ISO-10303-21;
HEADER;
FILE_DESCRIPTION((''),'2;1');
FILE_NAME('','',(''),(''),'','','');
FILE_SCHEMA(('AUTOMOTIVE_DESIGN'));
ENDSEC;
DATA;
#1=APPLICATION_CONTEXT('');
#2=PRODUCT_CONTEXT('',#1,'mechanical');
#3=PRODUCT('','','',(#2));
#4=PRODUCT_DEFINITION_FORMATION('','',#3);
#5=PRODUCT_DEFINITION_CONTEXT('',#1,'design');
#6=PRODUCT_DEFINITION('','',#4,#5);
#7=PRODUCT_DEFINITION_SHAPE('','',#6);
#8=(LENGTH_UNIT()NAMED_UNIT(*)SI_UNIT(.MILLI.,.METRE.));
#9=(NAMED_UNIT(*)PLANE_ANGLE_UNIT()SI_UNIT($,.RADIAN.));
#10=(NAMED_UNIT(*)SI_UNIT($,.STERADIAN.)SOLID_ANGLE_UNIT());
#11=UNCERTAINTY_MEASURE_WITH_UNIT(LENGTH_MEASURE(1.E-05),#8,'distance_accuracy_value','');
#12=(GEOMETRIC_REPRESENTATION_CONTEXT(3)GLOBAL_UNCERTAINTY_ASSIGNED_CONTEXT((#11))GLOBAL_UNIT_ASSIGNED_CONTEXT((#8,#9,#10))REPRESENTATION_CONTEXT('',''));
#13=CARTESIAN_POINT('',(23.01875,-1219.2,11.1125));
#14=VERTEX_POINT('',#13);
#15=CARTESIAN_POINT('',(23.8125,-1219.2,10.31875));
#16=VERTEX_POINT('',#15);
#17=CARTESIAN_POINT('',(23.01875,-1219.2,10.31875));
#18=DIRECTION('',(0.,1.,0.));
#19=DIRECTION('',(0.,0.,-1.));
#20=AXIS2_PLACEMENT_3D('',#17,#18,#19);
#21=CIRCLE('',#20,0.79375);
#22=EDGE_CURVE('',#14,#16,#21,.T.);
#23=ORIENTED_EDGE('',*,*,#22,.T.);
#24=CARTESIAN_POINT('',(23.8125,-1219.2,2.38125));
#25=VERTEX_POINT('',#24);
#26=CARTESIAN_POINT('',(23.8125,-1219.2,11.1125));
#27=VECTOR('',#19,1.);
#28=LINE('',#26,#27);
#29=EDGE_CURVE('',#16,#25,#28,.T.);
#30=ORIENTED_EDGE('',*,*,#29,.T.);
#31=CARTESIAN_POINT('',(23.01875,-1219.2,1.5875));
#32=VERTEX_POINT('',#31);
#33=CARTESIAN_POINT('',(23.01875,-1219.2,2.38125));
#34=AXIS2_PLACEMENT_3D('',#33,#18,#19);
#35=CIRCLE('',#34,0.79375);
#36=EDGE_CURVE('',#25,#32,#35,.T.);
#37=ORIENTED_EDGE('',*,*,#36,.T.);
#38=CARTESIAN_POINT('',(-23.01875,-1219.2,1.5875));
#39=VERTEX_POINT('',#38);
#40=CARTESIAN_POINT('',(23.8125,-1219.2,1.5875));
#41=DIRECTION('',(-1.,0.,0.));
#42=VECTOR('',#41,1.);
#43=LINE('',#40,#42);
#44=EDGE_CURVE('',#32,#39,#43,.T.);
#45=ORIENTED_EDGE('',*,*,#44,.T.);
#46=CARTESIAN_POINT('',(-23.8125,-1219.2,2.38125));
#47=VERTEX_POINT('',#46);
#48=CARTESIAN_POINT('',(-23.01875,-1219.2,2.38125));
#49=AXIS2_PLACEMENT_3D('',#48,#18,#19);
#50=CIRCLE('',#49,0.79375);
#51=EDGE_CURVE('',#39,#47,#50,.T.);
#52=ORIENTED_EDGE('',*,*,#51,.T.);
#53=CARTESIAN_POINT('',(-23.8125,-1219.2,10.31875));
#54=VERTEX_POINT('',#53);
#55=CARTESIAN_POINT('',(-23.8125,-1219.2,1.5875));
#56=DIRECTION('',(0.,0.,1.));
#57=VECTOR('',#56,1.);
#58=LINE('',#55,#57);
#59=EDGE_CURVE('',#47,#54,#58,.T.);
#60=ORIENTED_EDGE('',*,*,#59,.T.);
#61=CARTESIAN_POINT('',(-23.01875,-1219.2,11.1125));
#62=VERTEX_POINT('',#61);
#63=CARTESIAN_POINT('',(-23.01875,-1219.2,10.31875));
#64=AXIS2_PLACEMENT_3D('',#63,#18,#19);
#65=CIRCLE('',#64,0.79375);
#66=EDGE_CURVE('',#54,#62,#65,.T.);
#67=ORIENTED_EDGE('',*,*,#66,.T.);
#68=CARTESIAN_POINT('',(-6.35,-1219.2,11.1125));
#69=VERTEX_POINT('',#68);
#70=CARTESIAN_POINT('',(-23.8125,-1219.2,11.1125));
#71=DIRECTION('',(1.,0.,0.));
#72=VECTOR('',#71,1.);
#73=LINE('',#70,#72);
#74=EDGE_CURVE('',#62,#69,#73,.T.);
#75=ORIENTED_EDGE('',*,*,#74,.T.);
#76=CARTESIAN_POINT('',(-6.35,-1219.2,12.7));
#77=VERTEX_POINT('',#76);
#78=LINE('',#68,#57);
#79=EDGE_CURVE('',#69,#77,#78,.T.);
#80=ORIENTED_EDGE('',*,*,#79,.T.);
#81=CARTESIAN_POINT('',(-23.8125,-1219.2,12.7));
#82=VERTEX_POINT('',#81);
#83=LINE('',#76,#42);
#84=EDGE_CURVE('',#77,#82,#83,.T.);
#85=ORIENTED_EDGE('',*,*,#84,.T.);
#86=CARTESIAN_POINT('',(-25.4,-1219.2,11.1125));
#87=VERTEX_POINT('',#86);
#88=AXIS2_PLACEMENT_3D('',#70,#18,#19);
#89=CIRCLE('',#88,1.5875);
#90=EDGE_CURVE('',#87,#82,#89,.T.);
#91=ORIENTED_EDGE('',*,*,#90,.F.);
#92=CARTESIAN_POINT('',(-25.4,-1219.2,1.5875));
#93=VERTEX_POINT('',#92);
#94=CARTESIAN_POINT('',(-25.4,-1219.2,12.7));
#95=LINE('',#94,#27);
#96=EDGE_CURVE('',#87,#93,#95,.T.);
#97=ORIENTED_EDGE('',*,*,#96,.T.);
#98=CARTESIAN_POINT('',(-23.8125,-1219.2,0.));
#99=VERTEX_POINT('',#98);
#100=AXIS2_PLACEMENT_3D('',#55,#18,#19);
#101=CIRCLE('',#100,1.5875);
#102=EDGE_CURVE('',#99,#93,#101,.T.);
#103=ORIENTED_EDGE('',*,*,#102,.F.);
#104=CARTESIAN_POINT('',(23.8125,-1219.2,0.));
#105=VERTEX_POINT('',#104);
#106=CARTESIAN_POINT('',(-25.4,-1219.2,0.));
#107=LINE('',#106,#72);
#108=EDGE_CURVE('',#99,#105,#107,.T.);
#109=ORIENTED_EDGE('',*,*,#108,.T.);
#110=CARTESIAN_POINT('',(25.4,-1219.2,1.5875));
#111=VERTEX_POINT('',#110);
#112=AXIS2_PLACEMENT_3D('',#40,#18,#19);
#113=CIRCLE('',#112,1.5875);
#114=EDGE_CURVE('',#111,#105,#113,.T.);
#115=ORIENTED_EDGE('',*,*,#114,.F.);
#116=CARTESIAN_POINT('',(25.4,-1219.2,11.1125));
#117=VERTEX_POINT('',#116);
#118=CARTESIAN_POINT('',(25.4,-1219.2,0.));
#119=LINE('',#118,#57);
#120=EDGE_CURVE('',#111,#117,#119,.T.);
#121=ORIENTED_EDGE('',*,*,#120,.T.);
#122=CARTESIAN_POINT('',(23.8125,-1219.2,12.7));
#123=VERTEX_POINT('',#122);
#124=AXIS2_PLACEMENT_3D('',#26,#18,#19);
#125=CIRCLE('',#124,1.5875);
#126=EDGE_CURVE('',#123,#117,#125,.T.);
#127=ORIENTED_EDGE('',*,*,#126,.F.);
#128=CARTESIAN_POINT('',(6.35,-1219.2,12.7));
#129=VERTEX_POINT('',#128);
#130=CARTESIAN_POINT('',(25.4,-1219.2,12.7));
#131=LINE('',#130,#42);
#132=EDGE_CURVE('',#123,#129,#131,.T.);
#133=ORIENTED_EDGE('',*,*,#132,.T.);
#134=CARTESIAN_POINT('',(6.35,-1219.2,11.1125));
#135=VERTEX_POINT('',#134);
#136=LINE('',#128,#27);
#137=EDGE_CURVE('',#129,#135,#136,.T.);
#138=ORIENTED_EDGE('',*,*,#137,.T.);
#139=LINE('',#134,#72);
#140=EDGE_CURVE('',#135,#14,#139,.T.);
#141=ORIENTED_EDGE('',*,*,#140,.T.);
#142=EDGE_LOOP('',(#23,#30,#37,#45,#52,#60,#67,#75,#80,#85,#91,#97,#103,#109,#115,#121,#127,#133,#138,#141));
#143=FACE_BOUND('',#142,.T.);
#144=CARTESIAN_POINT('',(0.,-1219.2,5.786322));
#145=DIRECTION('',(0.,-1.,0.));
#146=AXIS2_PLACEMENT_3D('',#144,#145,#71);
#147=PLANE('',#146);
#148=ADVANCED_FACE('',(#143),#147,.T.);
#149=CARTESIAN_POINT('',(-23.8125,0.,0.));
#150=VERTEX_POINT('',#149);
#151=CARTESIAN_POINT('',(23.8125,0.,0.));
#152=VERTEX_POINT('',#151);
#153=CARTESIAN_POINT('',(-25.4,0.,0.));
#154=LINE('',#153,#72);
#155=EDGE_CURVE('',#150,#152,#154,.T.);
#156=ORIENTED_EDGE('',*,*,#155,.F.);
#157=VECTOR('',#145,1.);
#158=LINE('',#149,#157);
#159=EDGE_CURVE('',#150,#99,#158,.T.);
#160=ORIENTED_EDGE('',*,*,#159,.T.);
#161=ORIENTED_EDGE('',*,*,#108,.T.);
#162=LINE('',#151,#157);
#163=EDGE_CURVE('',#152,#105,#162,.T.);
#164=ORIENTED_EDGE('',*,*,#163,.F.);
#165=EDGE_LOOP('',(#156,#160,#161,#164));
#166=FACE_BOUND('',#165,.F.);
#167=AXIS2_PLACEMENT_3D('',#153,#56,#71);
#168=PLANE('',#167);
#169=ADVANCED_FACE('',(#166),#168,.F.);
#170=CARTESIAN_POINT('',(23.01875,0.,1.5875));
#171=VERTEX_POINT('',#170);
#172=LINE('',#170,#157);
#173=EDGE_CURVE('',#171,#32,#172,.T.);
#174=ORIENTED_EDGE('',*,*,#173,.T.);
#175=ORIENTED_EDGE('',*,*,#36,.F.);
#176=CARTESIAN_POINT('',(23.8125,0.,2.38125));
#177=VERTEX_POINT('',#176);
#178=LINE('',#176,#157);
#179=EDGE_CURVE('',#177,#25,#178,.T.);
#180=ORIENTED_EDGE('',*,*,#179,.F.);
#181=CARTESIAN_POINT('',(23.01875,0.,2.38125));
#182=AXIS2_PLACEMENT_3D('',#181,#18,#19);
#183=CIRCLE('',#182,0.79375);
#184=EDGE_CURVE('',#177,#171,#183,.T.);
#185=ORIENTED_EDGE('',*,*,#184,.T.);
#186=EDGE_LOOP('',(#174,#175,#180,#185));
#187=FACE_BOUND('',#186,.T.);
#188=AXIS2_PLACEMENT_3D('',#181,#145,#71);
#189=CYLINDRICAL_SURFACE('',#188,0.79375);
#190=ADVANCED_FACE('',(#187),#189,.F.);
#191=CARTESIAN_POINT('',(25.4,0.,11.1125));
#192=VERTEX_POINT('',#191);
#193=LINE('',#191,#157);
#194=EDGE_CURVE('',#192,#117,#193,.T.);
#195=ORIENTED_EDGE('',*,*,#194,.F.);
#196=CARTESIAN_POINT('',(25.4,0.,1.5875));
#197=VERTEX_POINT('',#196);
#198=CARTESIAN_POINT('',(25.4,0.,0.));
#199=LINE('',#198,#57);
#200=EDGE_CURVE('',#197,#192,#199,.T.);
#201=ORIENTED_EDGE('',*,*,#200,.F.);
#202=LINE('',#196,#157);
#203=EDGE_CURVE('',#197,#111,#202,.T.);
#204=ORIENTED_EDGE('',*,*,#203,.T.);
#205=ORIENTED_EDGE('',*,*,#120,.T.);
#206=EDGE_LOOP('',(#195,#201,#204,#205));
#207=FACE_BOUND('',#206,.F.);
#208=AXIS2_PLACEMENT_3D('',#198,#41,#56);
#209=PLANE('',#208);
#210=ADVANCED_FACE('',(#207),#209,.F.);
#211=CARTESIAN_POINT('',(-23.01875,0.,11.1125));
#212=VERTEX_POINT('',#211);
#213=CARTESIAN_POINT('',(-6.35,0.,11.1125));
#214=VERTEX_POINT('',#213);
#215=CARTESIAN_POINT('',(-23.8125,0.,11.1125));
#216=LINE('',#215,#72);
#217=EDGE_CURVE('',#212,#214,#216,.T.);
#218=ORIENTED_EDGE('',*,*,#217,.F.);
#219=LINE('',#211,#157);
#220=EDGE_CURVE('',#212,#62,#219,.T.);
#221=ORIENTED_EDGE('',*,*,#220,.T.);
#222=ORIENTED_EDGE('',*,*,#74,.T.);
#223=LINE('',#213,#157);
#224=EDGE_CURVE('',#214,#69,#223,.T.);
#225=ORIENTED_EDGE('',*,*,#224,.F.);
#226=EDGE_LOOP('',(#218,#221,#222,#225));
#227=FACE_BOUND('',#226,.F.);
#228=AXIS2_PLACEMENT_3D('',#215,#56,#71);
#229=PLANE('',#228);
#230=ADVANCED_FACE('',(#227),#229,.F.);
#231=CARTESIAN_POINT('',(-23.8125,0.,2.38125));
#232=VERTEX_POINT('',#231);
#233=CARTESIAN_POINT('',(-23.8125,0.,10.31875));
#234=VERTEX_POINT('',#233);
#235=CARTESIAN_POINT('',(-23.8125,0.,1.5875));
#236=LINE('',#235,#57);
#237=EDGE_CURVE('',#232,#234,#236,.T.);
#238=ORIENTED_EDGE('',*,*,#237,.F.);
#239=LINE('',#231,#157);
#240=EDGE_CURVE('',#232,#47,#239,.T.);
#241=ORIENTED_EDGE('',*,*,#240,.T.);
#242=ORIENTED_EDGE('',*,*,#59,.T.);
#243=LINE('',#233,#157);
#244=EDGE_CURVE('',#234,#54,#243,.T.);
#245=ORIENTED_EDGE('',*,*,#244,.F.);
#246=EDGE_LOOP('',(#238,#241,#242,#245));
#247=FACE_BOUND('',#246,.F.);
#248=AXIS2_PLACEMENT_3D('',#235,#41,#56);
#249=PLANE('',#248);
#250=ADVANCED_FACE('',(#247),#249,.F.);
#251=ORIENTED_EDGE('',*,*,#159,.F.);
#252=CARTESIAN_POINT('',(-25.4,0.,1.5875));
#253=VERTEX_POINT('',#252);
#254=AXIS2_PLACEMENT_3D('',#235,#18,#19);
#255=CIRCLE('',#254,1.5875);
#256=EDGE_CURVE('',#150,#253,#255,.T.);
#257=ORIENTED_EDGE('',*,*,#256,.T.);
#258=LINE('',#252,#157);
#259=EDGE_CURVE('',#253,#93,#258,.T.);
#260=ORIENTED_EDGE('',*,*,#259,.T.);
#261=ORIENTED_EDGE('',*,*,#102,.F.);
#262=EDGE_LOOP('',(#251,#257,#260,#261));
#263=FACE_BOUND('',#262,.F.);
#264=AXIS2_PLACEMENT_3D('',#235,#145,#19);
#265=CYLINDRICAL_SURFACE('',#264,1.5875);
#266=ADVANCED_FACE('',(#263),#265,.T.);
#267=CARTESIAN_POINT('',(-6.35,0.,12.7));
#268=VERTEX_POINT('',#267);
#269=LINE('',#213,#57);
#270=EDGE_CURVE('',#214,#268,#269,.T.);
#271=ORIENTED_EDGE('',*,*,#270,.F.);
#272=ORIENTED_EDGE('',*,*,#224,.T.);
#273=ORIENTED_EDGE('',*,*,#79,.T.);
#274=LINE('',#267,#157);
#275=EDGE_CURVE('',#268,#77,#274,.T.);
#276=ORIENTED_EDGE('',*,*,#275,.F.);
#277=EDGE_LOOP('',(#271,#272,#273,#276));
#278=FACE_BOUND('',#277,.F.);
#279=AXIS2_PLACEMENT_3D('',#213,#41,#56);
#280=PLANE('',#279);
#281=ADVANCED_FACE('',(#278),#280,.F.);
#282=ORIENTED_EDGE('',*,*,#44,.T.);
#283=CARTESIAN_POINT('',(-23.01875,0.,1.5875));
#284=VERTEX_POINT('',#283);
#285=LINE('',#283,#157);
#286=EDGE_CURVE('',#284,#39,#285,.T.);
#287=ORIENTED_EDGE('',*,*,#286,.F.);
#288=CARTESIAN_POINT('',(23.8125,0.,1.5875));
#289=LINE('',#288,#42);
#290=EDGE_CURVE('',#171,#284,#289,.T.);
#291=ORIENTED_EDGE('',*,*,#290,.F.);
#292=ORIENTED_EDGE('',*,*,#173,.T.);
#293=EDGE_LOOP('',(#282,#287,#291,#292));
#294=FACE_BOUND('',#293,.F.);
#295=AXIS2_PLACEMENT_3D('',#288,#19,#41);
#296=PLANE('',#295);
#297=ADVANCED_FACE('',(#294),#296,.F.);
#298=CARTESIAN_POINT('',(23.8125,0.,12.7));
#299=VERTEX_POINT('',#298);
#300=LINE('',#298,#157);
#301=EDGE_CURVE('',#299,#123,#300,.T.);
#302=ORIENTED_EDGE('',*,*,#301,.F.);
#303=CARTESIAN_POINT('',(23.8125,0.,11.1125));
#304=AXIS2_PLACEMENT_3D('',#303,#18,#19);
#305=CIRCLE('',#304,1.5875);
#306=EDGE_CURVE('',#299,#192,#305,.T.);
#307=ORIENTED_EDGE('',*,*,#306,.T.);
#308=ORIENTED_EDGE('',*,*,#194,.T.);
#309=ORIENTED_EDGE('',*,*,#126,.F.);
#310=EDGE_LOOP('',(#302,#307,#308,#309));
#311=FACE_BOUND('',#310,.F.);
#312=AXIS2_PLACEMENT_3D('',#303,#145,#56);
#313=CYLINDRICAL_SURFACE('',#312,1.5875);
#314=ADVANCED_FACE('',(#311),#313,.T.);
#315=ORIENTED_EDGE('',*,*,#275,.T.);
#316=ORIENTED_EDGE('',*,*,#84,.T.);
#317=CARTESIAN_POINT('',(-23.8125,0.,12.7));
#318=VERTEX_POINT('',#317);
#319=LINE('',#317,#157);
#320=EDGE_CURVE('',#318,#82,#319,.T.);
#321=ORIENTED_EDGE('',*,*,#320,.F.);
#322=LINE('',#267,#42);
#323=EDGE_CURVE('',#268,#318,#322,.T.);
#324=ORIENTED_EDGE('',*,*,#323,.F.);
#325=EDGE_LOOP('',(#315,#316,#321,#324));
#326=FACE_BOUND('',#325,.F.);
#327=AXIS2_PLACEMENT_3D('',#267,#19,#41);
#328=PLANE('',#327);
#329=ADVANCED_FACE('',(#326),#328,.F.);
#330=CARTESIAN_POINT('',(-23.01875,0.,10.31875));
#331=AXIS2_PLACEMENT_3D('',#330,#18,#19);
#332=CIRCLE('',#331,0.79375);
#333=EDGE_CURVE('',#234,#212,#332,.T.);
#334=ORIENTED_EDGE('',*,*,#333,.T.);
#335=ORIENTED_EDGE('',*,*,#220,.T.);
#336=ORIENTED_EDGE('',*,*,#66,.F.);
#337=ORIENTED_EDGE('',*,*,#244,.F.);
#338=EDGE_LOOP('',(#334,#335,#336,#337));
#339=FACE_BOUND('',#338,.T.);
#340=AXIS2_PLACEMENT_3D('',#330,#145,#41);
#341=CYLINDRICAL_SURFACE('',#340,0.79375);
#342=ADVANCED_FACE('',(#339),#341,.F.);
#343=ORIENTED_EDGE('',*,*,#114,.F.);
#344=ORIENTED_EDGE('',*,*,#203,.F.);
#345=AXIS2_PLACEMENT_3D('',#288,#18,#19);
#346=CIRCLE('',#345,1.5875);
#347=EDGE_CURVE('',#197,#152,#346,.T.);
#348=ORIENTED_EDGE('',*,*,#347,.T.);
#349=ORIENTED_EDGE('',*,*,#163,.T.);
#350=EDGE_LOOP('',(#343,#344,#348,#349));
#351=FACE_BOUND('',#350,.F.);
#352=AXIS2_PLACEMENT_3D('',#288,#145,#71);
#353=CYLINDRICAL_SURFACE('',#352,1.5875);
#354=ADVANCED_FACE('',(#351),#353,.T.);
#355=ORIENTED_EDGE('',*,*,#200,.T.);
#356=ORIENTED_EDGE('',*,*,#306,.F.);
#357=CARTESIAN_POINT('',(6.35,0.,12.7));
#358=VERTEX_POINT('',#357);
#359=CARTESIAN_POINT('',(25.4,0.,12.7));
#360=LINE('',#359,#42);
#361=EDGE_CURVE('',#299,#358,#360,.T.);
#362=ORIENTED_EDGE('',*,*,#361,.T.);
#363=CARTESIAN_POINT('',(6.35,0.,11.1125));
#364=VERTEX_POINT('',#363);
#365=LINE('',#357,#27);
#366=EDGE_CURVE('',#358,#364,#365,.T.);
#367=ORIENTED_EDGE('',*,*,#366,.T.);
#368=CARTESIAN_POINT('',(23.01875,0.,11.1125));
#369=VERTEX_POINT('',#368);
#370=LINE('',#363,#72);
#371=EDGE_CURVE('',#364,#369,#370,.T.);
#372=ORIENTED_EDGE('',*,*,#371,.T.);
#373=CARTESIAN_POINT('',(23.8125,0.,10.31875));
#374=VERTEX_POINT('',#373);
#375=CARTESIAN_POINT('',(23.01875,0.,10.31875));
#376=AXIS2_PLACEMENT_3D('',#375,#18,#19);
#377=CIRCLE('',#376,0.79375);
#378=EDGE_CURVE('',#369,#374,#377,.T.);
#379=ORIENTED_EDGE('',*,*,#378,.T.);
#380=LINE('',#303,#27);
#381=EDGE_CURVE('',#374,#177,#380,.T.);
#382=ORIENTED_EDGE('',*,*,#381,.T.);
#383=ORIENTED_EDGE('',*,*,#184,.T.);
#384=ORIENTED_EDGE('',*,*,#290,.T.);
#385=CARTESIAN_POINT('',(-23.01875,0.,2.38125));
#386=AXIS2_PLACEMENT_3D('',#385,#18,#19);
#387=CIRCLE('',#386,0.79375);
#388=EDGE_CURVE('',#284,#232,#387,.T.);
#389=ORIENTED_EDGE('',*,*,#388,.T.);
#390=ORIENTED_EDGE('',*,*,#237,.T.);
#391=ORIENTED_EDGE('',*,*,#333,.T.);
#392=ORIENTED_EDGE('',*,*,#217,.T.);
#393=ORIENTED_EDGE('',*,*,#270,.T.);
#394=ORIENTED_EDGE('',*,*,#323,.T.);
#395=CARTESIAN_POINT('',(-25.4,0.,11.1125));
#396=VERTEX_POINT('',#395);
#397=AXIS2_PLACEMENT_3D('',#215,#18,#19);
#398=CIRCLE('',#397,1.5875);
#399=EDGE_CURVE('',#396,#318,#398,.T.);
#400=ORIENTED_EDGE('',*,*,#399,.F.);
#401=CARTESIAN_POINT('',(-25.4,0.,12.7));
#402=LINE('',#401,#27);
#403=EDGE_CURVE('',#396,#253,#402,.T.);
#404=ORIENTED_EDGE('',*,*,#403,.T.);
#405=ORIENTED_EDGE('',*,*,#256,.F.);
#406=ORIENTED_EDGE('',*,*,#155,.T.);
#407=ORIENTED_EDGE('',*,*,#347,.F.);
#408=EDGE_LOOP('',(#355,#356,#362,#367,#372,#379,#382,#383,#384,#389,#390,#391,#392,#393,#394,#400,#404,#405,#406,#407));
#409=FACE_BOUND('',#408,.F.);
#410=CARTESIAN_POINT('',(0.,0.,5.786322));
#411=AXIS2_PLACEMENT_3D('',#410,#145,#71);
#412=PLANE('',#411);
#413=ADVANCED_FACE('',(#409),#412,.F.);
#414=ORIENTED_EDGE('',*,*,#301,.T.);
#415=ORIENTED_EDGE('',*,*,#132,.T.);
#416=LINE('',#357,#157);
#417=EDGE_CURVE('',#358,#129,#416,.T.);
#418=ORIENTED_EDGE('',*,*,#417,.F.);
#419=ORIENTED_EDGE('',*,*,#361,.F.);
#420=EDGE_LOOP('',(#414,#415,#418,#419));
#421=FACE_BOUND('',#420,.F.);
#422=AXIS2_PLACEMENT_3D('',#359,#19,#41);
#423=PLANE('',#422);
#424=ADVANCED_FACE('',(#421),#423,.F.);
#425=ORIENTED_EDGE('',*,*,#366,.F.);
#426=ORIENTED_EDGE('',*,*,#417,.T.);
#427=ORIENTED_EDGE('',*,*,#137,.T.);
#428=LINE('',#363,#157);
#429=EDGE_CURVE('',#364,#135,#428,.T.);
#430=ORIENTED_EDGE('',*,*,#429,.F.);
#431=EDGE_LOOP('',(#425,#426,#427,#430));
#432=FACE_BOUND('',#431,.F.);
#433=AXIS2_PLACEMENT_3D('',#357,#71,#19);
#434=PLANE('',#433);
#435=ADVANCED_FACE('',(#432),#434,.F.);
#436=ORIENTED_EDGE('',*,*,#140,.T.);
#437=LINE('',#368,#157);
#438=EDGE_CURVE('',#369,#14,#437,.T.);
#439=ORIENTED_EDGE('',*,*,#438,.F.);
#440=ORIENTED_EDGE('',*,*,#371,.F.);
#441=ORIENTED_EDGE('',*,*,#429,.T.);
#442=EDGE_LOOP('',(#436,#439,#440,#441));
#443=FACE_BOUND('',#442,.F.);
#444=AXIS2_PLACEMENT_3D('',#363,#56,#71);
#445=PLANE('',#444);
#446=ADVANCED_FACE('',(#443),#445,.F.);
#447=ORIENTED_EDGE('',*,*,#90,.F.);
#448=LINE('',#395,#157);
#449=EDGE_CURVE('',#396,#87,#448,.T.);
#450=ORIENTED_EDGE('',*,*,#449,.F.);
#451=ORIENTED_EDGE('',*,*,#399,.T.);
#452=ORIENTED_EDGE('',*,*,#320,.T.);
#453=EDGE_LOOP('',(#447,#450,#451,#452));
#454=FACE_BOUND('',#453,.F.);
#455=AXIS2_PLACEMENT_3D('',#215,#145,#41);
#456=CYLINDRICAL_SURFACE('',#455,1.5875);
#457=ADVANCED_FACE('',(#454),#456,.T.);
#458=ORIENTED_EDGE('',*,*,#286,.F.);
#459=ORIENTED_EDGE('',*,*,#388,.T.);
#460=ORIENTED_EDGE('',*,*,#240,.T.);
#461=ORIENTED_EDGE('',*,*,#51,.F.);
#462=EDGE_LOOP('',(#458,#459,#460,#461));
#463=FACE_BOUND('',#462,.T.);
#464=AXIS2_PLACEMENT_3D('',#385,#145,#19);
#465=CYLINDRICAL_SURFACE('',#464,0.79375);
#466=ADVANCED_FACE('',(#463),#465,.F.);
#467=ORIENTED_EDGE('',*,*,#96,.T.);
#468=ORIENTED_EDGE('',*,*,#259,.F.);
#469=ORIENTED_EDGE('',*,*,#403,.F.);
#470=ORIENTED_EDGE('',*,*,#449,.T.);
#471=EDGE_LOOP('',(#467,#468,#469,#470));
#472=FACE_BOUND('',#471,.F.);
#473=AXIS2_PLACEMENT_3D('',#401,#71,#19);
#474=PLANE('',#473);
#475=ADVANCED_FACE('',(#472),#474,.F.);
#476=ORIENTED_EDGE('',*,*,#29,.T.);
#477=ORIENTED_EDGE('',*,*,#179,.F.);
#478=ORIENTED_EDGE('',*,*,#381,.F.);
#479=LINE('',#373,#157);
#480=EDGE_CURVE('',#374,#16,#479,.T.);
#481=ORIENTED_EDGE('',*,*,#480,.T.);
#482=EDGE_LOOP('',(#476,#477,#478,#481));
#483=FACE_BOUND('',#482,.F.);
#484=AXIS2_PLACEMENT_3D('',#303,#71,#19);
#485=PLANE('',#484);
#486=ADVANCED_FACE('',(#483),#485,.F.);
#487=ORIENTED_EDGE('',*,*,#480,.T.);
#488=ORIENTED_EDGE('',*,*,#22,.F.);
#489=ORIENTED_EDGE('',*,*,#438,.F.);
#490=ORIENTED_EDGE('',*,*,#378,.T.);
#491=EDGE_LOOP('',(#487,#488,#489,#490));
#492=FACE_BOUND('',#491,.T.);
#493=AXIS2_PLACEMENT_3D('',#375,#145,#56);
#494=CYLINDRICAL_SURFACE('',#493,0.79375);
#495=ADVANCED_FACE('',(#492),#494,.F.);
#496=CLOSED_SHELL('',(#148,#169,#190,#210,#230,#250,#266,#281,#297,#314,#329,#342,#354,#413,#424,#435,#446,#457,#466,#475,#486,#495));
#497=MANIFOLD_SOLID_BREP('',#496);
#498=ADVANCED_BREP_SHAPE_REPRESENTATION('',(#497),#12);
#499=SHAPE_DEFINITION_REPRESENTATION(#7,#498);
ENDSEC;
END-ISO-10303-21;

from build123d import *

# Parameters (mm, degrees)
F1_DEPTH = 1219.2
F2_R     = 0.79375
F3_R     = 1.5875


# Not quite as in the source:
# - a feature names something its author has since deleted; it is built from what else it names


with BuildPart() as f1:
    # F0 (on Front) → F1 (new body)
    with BuildSketch(Plane.XZ):
        Polygon((-25.4, 0), (0, 0), (25.4, 0), (25.4, 12.7), (6.35, 12.7), (6.35, 11.1125), (23.8125, 11.1125), (23.8125, 1.5875), (0, 1.5875), (-23.8125, 1.5875), (-23.8125, 11.1125), (-6.35, 11.1125), (-6.35, 12.7), (-25.4, 12.7), align=None)
    extrude(amount=F1_DEPTH)

    # F2
    f2_edges = [f1.edges().sort_by_distance(p)[0] for p in [
        (-23.8125, -609.6, 1.5875),
        (-23.8125, -609.6, 11.1125),
        (23.8125, -609.6, 1.5875),
        (23.8125, -609.6, 11.1125),
    ]]
    fillet(f2_edges, radius=F2_R)

    # F3
    f3_edges = [f1.edges().sort_by_distance(p)[0] for p in [
        (25.4, -609.6, 12.7),
        (25.4, -609.6, 0),
        (-25.4, -609.6, 0),
        (-25.4, -609.6, 12.7),
    ]]
    fillet(f3_edges, radius=F3_R)


solid = f1.part
